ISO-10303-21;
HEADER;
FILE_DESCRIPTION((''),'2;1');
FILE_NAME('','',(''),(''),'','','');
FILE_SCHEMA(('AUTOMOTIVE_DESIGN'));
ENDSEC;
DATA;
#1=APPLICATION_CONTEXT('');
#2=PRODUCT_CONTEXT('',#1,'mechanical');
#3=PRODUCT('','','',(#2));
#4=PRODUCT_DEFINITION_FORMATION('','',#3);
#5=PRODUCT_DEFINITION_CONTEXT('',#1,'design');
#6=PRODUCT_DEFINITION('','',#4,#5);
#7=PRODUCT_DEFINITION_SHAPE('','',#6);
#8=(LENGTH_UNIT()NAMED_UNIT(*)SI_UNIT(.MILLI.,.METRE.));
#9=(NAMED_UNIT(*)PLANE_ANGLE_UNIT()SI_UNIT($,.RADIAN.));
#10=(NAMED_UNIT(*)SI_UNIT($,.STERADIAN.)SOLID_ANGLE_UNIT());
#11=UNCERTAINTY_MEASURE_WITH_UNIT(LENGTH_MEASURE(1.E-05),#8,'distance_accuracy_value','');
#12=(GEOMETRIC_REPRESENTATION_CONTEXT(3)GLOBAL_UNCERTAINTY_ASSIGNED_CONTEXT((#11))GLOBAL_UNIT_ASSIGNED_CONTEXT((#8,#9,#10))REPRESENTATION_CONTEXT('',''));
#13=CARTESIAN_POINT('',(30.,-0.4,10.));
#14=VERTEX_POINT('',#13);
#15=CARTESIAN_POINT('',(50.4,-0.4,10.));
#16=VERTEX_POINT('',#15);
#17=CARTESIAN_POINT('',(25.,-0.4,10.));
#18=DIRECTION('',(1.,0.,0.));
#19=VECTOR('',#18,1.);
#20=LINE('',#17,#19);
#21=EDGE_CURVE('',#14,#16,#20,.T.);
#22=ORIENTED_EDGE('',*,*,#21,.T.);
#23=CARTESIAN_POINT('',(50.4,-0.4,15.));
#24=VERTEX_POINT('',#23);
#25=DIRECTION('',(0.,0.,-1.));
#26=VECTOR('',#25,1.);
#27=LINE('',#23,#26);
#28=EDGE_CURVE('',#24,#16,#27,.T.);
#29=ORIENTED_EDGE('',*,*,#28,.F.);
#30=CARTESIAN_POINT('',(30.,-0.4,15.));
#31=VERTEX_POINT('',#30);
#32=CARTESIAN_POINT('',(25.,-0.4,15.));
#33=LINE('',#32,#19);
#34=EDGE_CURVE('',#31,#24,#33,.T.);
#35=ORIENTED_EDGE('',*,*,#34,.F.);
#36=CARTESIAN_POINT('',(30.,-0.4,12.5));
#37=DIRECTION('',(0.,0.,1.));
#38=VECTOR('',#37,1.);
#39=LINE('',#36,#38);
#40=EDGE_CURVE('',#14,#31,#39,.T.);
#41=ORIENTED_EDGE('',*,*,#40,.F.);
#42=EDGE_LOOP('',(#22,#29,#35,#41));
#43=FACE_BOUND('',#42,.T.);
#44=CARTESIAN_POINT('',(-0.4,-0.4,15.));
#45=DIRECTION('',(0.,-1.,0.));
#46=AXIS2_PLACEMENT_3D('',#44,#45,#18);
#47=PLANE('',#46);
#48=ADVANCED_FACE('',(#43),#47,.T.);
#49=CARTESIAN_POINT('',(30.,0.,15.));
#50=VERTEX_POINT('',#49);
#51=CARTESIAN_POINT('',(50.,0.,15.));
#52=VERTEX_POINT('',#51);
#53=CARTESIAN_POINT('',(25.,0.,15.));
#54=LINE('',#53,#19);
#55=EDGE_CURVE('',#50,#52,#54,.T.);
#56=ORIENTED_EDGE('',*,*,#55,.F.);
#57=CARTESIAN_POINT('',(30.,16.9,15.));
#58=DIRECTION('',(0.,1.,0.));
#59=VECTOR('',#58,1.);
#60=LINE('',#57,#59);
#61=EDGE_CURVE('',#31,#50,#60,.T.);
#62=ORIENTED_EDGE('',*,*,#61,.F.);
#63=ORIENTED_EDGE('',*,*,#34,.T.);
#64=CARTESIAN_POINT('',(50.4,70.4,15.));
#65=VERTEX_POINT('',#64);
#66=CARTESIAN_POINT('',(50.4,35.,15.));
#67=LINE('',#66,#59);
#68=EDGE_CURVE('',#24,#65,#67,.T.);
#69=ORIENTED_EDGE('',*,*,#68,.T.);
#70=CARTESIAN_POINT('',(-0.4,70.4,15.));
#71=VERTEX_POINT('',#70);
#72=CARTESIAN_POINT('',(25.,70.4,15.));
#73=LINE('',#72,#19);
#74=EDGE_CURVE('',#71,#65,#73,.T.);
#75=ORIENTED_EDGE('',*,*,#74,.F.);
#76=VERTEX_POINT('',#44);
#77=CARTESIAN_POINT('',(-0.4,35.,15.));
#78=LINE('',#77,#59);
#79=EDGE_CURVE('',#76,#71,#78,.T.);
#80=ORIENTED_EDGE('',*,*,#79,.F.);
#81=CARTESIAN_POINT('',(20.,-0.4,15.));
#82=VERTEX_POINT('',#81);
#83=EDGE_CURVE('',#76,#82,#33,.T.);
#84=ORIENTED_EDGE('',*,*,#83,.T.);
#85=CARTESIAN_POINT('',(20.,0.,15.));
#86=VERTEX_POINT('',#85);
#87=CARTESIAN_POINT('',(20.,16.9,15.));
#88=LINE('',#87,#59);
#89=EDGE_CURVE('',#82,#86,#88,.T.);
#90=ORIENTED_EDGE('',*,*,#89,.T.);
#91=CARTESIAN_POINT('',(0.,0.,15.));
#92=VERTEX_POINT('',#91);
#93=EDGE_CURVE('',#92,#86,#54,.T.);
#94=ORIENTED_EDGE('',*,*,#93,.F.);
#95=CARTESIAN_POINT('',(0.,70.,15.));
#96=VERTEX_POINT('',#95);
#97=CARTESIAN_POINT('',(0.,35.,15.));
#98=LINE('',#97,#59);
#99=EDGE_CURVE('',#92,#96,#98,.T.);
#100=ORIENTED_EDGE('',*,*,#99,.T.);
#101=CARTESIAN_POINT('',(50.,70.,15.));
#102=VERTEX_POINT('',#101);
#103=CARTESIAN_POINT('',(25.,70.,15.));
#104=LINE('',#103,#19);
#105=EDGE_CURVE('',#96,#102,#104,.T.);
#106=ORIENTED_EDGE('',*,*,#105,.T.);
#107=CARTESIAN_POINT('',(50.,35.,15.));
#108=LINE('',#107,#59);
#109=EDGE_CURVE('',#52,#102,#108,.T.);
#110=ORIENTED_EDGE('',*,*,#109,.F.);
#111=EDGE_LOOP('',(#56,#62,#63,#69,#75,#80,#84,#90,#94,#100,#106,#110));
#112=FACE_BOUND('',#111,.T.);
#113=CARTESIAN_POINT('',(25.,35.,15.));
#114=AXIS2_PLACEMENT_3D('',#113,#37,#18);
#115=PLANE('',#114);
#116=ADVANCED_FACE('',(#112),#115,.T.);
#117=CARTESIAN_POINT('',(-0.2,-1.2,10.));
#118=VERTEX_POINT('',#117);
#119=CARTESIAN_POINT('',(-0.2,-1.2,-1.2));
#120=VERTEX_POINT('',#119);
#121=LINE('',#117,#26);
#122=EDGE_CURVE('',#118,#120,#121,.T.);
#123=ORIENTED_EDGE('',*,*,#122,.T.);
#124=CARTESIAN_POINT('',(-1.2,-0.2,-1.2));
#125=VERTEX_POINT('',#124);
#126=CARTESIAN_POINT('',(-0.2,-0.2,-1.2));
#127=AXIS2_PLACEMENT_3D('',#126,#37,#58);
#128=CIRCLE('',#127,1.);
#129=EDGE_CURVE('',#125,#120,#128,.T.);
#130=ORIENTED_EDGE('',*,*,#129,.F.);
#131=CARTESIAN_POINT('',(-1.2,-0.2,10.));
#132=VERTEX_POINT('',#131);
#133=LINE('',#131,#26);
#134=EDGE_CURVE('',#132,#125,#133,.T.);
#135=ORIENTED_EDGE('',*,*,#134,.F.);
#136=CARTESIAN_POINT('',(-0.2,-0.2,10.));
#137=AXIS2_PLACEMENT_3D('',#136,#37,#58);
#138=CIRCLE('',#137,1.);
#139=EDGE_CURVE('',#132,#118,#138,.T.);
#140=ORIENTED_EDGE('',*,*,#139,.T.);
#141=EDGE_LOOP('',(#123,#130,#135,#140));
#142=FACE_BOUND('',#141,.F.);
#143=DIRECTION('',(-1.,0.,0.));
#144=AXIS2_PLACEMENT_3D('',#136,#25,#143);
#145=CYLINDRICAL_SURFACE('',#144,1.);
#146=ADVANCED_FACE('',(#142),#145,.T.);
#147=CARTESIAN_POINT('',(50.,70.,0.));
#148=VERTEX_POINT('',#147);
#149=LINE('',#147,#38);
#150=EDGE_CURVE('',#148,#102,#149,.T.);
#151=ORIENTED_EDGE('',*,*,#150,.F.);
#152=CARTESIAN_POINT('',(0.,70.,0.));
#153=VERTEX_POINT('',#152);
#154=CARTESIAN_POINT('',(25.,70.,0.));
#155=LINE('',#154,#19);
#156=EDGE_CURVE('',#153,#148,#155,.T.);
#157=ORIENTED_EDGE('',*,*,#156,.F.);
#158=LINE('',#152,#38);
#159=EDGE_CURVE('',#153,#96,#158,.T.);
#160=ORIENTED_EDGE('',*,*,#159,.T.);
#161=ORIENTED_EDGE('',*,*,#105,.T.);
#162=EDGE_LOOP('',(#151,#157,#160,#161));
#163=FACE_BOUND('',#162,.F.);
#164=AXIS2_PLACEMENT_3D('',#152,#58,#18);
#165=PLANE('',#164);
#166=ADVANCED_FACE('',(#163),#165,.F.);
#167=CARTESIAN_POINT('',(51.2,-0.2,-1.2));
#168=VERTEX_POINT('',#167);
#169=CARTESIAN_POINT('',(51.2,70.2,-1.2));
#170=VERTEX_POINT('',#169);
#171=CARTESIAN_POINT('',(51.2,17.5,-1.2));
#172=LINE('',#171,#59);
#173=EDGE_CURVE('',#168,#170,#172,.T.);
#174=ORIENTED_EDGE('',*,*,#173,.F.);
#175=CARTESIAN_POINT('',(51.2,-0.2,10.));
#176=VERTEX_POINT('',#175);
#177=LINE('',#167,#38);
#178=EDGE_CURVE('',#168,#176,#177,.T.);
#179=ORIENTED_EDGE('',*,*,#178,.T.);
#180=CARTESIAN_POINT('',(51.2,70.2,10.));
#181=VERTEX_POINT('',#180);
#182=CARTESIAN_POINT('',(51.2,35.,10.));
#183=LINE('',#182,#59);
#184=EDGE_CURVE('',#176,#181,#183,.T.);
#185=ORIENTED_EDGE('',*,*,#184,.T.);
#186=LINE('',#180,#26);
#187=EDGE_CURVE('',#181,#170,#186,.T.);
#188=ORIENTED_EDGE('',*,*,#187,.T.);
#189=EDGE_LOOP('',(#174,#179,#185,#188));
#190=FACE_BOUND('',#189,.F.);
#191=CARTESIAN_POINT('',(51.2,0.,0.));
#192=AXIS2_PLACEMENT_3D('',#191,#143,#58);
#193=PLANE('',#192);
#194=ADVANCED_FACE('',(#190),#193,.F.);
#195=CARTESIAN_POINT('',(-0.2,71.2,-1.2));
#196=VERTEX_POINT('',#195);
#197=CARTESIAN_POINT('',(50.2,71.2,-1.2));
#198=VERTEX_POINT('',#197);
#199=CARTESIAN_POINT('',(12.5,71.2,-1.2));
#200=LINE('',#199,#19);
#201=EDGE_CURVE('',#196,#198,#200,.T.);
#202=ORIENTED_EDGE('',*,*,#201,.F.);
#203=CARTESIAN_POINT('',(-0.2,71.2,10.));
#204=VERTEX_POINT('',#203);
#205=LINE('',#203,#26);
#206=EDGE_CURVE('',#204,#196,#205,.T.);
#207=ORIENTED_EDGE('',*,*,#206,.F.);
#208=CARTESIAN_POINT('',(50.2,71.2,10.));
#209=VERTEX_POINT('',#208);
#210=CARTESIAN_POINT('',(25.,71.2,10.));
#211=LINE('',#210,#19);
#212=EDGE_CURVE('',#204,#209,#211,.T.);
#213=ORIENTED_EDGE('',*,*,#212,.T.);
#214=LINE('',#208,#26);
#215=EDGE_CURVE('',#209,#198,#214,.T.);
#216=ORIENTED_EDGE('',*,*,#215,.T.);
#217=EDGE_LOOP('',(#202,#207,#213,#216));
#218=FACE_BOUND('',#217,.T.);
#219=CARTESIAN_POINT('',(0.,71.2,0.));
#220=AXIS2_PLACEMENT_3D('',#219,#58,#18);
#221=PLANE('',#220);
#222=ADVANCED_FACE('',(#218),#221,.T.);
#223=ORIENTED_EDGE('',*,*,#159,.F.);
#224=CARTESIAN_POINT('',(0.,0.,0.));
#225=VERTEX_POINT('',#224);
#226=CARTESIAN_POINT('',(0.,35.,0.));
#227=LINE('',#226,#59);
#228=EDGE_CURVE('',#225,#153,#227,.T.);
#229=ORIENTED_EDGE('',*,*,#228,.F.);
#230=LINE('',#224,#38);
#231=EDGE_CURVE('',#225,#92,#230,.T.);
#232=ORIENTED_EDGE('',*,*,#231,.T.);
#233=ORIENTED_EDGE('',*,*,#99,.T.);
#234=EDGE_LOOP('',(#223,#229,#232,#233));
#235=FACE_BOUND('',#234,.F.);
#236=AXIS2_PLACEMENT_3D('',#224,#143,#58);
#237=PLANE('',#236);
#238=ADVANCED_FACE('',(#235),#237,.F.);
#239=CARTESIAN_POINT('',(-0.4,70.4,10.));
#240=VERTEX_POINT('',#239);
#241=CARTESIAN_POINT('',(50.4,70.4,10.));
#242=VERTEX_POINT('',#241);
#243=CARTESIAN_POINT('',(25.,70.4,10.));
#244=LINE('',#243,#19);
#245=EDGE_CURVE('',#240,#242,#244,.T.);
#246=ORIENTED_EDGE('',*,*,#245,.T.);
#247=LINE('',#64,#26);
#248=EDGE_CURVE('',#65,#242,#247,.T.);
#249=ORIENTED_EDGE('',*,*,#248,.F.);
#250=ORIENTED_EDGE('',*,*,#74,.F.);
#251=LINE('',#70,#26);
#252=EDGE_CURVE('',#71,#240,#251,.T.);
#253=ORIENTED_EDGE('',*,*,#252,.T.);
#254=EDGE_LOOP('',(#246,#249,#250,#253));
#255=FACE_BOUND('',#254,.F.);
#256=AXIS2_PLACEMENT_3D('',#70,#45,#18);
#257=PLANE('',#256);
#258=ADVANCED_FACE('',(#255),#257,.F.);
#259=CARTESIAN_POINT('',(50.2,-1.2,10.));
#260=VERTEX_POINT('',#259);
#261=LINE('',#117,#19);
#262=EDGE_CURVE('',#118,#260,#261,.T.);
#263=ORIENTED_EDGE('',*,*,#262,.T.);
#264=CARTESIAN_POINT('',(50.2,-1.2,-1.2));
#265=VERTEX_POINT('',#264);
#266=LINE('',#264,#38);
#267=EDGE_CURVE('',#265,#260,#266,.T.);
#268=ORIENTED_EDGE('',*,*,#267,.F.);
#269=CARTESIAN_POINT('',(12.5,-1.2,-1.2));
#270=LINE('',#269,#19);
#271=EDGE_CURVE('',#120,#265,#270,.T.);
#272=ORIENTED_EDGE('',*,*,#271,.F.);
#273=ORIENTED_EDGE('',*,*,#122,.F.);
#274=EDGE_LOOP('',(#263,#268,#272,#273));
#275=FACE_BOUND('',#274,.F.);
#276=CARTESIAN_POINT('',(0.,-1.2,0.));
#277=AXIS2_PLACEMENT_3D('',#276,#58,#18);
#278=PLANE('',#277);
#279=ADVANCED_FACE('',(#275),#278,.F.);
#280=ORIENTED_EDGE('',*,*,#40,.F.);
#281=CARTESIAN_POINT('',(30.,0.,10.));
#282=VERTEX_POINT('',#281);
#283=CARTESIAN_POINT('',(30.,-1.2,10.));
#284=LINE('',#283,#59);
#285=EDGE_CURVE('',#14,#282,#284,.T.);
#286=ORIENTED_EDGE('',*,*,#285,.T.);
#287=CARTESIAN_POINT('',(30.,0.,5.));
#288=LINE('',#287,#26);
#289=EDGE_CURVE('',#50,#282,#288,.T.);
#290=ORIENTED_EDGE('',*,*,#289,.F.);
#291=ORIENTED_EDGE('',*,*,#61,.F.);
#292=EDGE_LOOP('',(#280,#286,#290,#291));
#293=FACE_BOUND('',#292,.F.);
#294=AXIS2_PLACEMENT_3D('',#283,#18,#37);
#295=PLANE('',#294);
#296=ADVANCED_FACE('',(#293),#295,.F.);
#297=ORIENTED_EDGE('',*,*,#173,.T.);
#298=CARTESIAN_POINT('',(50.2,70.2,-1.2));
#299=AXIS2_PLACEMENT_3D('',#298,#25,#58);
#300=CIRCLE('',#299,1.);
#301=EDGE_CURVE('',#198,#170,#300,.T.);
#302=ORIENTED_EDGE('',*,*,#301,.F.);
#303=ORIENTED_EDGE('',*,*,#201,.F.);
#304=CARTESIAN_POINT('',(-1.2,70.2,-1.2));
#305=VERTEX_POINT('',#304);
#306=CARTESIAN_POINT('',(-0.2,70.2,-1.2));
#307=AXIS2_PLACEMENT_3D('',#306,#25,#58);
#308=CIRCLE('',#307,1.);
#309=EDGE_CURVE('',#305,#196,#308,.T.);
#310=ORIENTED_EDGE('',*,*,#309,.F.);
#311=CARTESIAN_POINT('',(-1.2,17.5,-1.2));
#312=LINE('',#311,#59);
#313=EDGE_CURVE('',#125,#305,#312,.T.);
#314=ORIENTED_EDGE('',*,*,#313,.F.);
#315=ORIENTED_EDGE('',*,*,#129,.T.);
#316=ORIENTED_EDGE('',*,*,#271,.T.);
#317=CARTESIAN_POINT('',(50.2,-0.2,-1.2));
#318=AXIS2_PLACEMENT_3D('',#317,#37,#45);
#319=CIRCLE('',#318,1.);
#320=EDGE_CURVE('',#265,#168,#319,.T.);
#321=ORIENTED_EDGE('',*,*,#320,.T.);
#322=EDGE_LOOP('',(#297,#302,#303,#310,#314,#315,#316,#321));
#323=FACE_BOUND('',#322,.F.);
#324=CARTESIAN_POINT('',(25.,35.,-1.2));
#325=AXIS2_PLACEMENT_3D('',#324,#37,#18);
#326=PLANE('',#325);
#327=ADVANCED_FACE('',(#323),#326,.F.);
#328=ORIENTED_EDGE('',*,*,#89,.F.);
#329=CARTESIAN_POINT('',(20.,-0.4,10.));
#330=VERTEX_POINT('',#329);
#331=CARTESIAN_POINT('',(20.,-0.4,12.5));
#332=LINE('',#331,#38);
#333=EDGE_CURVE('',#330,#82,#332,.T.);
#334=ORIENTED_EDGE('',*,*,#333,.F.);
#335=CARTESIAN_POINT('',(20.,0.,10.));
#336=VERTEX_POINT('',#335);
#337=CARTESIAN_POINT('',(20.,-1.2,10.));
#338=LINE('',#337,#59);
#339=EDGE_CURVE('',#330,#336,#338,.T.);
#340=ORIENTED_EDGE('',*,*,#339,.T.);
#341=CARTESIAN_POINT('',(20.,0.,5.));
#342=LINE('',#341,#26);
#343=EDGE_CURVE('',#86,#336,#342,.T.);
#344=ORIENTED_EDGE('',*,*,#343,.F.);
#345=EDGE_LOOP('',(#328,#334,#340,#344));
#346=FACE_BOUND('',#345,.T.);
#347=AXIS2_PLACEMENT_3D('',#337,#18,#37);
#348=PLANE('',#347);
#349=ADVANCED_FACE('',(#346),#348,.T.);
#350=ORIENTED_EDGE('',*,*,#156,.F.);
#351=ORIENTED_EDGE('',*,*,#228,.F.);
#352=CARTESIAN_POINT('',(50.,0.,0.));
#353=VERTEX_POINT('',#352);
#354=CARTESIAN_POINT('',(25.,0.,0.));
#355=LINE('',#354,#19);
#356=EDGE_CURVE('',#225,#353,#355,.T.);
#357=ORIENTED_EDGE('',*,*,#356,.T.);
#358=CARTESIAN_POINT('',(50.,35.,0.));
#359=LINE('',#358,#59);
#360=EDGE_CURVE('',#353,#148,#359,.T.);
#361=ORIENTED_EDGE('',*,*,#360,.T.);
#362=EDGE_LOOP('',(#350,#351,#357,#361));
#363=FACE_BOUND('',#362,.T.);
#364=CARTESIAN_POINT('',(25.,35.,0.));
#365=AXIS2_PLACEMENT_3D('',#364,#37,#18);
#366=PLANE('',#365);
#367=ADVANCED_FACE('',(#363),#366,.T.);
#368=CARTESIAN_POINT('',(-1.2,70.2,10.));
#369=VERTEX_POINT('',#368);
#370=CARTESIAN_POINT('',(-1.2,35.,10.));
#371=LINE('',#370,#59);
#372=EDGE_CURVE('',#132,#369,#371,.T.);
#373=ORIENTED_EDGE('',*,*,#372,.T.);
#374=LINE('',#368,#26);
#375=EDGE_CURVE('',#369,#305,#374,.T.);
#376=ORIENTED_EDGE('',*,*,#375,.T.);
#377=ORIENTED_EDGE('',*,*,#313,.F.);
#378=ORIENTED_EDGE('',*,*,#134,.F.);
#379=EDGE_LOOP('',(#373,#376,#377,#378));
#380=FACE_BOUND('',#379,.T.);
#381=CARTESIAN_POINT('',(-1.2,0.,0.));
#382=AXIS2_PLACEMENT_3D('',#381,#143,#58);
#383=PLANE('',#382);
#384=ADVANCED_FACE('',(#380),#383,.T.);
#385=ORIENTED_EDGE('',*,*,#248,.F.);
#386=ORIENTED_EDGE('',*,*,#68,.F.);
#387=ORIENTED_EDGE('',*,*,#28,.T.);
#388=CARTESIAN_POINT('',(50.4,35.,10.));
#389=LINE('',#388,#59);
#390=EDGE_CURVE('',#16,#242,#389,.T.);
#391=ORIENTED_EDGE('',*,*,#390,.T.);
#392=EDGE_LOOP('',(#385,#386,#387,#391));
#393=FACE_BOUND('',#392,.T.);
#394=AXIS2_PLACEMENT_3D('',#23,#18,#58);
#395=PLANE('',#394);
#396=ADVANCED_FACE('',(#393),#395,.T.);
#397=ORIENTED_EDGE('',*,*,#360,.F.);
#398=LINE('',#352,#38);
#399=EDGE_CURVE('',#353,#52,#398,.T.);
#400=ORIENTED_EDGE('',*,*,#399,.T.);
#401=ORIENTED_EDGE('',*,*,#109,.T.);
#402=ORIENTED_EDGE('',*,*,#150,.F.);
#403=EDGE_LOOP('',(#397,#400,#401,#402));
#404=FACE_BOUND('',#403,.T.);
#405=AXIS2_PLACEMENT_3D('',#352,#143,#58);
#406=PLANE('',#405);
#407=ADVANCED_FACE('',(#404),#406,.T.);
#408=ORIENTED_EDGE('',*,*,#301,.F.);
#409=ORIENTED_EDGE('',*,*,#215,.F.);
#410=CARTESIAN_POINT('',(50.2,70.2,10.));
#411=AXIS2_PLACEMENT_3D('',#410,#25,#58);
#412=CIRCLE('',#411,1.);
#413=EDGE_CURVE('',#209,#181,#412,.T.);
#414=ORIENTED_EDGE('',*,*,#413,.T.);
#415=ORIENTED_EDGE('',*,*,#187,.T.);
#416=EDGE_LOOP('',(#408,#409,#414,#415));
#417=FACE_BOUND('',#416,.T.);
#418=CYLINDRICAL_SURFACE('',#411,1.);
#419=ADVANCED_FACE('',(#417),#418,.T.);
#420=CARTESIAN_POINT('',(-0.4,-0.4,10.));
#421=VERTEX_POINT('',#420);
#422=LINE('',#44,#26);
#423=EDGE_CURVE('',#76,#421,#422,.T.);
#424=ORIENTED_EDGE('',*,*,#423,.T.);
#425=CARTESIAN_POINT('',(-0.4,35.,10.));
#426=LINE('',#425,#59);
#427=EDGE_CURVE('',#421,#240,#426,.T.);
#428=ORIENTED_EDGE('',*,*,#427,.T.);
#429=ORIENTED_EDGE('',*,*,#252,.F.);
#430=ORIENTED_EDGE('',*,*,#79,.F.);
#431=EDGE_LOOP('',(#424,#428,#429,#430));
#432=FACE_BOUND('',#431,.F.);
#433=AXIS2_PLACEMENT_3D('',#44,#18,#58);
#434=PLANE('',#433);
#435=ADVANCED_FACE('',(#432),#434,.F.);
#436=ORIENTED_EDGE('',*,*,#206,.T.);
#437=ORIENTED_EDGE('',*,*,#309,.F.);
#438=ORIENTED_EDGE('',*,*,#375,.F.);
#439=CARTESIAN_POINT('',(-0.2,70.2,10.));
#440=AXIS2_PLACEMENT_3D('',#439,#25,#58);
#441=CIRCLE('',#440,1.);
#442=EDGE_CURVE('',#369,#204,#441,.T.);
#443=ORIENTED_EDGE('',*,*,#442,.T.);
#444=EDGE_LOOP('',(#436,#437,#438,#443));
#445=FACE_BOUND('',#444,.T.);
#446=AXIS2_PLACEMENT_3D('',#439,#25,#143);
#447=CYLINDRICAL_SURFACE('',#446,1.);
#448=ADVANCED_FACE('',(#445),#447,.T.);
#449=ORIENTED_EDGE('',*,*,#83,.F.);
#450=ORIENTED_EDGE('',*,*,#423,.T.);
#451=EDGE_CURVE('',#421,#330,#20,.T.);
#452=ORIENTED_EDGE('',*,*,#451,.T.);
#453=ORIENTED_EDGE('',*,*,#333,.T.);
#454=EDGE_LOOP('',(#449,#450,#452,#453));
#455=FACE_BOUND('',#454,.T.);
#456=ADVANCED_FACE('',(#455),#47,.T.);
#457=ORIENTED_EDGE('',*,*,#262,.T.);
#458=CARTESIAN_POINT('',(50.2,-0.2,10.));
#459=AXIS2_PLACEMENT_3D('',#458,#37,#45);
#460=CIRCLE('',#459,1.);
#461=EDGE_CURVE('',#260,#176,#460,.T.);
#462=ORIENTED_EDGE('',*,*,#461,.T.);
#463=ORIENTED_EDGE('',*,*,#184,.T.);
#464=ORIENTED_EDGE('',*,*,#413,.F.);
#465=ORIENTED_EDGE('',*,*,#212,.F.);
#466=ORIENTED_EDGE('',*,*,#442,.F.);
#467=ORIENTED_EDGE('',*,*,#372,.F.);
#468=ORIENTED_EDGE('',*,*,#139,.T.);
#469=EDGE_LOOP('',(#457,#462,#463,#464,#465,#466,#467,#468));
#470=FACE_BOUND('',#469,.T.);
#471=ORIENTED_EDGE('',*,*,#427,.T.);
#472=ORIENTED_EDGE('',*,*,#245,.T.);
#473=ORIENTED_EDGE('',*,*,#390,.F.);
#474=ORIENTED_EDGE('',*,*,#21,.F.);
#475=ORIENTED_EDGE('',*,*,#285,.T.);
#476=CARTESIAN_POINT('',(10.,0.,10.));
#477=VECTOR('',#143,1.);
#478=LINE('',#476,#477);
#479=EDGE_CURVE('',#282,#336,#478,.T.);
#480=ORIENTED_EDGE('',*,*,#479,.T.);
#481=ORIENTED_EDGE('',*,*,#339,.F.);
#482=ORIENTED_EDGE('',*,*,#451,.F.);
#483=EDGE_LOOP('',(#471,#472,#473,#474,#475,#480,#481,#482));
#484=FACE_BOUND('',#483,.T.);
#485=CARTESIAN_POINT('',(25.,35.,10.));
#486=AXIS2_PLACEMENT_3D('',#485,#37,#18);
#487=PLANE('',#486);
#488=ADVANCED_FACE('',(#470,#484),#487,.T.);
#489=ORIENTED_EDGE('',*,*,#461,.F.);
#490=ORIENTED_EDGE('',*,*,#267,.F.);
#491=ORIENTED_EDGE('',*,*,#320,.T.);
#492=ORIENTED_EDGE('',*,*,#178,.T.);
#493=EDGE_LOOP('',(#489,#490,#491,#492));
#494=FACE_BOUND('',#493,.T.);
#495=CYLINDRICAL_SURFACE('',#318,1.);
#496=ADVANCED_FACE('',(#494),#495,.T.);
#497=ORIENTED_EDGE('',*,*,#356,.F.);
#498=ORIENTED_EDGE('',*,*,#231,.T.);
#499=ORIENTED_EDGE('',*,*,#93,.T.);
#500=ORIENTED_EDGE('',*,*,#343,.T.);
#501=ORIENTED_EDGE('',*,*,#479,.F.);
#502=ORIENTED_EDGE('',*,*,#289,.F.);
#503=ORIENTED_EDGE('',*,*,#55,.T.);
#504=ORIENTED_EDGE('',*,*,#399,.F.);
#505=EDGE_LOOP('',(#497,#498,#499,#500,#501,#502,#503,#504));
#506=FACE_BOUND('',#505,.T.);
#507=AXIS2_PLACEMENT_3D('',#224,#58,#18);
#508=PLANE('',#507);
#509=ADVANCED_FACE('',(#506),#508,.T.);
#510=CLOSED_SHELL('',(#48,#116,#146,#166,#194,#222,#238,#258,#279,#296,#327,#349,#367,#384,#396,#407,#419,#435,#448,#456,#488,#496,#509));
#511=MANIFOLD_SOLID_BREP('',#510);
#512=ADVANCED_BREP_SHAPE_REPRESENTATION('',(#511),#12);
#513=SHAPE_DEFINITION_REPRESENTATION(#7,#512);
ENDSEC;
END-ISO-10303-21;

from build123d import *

# Parameters (mm, degrees)
F0_W     = 50
F0_H     = 70
F1_DEPTH = 15
F2_T     = 1.2
F3_W     = 52.4
F3_H     = 72.4
F3_W_2   = 50.8
F3_H_2   = 70.8
F4_DEPTH = 5
F5_R     = 1
F6_W     = 10
F6_H     = 10
F7_DEPTH = 25


with BuildPart() as f1:
    # F0 (on Top) → F1 (new body)
    with BuildSketch(Plane.XY):
        with Locations((25, 35)):
            Rectangle(F0_W, F0_H)
    extrude(amount=F1_DEPTH)

    # F2
    f2_openings = [f1.faces().sort_by_distance(p)[0] for p in [
        (25, 35, 15),
    ]]
    offset(amount=F2_T, openings=f2_openings, kind=Kind.INTERSECTION)

    # F3 (on face) → F4 (cut)
    with BuildSketch(Plane.XY.offset(15)):
        with Locations((25, 35)):
            Rectangle(F3_W, F3_H)
        with Locations((25, 35)):
            Rectangle(F3_W_2, F3_H_2, mode=Mode.SUBTRACT)
    extrude(amount=-F4_DEPTH, mode=Mode.SUBTRACT)

    # F5
    f5_edges = [f1.edges().sort_by_distance(p)[0] for p in [
        (-1.2, 71.2, 4.4),
        (-1.2, -1.2, 4.4),
        (51.2, -1.2, 4.4),
        (51.2, 71.2, 4.4),
    ]]
    fillet(f5_edges, radius=F5_R)

    # F6 (on face) → F7 (cut)
    with BuildSketch(Plane.XZ.offset(1.2)):
        with Locations((25, 15)):
            Rectangle(F6_W, F6_H)
    extrude(amount=-F7_DEPTH, mode=Mode.SUBTRACT)


solid = f1.part
